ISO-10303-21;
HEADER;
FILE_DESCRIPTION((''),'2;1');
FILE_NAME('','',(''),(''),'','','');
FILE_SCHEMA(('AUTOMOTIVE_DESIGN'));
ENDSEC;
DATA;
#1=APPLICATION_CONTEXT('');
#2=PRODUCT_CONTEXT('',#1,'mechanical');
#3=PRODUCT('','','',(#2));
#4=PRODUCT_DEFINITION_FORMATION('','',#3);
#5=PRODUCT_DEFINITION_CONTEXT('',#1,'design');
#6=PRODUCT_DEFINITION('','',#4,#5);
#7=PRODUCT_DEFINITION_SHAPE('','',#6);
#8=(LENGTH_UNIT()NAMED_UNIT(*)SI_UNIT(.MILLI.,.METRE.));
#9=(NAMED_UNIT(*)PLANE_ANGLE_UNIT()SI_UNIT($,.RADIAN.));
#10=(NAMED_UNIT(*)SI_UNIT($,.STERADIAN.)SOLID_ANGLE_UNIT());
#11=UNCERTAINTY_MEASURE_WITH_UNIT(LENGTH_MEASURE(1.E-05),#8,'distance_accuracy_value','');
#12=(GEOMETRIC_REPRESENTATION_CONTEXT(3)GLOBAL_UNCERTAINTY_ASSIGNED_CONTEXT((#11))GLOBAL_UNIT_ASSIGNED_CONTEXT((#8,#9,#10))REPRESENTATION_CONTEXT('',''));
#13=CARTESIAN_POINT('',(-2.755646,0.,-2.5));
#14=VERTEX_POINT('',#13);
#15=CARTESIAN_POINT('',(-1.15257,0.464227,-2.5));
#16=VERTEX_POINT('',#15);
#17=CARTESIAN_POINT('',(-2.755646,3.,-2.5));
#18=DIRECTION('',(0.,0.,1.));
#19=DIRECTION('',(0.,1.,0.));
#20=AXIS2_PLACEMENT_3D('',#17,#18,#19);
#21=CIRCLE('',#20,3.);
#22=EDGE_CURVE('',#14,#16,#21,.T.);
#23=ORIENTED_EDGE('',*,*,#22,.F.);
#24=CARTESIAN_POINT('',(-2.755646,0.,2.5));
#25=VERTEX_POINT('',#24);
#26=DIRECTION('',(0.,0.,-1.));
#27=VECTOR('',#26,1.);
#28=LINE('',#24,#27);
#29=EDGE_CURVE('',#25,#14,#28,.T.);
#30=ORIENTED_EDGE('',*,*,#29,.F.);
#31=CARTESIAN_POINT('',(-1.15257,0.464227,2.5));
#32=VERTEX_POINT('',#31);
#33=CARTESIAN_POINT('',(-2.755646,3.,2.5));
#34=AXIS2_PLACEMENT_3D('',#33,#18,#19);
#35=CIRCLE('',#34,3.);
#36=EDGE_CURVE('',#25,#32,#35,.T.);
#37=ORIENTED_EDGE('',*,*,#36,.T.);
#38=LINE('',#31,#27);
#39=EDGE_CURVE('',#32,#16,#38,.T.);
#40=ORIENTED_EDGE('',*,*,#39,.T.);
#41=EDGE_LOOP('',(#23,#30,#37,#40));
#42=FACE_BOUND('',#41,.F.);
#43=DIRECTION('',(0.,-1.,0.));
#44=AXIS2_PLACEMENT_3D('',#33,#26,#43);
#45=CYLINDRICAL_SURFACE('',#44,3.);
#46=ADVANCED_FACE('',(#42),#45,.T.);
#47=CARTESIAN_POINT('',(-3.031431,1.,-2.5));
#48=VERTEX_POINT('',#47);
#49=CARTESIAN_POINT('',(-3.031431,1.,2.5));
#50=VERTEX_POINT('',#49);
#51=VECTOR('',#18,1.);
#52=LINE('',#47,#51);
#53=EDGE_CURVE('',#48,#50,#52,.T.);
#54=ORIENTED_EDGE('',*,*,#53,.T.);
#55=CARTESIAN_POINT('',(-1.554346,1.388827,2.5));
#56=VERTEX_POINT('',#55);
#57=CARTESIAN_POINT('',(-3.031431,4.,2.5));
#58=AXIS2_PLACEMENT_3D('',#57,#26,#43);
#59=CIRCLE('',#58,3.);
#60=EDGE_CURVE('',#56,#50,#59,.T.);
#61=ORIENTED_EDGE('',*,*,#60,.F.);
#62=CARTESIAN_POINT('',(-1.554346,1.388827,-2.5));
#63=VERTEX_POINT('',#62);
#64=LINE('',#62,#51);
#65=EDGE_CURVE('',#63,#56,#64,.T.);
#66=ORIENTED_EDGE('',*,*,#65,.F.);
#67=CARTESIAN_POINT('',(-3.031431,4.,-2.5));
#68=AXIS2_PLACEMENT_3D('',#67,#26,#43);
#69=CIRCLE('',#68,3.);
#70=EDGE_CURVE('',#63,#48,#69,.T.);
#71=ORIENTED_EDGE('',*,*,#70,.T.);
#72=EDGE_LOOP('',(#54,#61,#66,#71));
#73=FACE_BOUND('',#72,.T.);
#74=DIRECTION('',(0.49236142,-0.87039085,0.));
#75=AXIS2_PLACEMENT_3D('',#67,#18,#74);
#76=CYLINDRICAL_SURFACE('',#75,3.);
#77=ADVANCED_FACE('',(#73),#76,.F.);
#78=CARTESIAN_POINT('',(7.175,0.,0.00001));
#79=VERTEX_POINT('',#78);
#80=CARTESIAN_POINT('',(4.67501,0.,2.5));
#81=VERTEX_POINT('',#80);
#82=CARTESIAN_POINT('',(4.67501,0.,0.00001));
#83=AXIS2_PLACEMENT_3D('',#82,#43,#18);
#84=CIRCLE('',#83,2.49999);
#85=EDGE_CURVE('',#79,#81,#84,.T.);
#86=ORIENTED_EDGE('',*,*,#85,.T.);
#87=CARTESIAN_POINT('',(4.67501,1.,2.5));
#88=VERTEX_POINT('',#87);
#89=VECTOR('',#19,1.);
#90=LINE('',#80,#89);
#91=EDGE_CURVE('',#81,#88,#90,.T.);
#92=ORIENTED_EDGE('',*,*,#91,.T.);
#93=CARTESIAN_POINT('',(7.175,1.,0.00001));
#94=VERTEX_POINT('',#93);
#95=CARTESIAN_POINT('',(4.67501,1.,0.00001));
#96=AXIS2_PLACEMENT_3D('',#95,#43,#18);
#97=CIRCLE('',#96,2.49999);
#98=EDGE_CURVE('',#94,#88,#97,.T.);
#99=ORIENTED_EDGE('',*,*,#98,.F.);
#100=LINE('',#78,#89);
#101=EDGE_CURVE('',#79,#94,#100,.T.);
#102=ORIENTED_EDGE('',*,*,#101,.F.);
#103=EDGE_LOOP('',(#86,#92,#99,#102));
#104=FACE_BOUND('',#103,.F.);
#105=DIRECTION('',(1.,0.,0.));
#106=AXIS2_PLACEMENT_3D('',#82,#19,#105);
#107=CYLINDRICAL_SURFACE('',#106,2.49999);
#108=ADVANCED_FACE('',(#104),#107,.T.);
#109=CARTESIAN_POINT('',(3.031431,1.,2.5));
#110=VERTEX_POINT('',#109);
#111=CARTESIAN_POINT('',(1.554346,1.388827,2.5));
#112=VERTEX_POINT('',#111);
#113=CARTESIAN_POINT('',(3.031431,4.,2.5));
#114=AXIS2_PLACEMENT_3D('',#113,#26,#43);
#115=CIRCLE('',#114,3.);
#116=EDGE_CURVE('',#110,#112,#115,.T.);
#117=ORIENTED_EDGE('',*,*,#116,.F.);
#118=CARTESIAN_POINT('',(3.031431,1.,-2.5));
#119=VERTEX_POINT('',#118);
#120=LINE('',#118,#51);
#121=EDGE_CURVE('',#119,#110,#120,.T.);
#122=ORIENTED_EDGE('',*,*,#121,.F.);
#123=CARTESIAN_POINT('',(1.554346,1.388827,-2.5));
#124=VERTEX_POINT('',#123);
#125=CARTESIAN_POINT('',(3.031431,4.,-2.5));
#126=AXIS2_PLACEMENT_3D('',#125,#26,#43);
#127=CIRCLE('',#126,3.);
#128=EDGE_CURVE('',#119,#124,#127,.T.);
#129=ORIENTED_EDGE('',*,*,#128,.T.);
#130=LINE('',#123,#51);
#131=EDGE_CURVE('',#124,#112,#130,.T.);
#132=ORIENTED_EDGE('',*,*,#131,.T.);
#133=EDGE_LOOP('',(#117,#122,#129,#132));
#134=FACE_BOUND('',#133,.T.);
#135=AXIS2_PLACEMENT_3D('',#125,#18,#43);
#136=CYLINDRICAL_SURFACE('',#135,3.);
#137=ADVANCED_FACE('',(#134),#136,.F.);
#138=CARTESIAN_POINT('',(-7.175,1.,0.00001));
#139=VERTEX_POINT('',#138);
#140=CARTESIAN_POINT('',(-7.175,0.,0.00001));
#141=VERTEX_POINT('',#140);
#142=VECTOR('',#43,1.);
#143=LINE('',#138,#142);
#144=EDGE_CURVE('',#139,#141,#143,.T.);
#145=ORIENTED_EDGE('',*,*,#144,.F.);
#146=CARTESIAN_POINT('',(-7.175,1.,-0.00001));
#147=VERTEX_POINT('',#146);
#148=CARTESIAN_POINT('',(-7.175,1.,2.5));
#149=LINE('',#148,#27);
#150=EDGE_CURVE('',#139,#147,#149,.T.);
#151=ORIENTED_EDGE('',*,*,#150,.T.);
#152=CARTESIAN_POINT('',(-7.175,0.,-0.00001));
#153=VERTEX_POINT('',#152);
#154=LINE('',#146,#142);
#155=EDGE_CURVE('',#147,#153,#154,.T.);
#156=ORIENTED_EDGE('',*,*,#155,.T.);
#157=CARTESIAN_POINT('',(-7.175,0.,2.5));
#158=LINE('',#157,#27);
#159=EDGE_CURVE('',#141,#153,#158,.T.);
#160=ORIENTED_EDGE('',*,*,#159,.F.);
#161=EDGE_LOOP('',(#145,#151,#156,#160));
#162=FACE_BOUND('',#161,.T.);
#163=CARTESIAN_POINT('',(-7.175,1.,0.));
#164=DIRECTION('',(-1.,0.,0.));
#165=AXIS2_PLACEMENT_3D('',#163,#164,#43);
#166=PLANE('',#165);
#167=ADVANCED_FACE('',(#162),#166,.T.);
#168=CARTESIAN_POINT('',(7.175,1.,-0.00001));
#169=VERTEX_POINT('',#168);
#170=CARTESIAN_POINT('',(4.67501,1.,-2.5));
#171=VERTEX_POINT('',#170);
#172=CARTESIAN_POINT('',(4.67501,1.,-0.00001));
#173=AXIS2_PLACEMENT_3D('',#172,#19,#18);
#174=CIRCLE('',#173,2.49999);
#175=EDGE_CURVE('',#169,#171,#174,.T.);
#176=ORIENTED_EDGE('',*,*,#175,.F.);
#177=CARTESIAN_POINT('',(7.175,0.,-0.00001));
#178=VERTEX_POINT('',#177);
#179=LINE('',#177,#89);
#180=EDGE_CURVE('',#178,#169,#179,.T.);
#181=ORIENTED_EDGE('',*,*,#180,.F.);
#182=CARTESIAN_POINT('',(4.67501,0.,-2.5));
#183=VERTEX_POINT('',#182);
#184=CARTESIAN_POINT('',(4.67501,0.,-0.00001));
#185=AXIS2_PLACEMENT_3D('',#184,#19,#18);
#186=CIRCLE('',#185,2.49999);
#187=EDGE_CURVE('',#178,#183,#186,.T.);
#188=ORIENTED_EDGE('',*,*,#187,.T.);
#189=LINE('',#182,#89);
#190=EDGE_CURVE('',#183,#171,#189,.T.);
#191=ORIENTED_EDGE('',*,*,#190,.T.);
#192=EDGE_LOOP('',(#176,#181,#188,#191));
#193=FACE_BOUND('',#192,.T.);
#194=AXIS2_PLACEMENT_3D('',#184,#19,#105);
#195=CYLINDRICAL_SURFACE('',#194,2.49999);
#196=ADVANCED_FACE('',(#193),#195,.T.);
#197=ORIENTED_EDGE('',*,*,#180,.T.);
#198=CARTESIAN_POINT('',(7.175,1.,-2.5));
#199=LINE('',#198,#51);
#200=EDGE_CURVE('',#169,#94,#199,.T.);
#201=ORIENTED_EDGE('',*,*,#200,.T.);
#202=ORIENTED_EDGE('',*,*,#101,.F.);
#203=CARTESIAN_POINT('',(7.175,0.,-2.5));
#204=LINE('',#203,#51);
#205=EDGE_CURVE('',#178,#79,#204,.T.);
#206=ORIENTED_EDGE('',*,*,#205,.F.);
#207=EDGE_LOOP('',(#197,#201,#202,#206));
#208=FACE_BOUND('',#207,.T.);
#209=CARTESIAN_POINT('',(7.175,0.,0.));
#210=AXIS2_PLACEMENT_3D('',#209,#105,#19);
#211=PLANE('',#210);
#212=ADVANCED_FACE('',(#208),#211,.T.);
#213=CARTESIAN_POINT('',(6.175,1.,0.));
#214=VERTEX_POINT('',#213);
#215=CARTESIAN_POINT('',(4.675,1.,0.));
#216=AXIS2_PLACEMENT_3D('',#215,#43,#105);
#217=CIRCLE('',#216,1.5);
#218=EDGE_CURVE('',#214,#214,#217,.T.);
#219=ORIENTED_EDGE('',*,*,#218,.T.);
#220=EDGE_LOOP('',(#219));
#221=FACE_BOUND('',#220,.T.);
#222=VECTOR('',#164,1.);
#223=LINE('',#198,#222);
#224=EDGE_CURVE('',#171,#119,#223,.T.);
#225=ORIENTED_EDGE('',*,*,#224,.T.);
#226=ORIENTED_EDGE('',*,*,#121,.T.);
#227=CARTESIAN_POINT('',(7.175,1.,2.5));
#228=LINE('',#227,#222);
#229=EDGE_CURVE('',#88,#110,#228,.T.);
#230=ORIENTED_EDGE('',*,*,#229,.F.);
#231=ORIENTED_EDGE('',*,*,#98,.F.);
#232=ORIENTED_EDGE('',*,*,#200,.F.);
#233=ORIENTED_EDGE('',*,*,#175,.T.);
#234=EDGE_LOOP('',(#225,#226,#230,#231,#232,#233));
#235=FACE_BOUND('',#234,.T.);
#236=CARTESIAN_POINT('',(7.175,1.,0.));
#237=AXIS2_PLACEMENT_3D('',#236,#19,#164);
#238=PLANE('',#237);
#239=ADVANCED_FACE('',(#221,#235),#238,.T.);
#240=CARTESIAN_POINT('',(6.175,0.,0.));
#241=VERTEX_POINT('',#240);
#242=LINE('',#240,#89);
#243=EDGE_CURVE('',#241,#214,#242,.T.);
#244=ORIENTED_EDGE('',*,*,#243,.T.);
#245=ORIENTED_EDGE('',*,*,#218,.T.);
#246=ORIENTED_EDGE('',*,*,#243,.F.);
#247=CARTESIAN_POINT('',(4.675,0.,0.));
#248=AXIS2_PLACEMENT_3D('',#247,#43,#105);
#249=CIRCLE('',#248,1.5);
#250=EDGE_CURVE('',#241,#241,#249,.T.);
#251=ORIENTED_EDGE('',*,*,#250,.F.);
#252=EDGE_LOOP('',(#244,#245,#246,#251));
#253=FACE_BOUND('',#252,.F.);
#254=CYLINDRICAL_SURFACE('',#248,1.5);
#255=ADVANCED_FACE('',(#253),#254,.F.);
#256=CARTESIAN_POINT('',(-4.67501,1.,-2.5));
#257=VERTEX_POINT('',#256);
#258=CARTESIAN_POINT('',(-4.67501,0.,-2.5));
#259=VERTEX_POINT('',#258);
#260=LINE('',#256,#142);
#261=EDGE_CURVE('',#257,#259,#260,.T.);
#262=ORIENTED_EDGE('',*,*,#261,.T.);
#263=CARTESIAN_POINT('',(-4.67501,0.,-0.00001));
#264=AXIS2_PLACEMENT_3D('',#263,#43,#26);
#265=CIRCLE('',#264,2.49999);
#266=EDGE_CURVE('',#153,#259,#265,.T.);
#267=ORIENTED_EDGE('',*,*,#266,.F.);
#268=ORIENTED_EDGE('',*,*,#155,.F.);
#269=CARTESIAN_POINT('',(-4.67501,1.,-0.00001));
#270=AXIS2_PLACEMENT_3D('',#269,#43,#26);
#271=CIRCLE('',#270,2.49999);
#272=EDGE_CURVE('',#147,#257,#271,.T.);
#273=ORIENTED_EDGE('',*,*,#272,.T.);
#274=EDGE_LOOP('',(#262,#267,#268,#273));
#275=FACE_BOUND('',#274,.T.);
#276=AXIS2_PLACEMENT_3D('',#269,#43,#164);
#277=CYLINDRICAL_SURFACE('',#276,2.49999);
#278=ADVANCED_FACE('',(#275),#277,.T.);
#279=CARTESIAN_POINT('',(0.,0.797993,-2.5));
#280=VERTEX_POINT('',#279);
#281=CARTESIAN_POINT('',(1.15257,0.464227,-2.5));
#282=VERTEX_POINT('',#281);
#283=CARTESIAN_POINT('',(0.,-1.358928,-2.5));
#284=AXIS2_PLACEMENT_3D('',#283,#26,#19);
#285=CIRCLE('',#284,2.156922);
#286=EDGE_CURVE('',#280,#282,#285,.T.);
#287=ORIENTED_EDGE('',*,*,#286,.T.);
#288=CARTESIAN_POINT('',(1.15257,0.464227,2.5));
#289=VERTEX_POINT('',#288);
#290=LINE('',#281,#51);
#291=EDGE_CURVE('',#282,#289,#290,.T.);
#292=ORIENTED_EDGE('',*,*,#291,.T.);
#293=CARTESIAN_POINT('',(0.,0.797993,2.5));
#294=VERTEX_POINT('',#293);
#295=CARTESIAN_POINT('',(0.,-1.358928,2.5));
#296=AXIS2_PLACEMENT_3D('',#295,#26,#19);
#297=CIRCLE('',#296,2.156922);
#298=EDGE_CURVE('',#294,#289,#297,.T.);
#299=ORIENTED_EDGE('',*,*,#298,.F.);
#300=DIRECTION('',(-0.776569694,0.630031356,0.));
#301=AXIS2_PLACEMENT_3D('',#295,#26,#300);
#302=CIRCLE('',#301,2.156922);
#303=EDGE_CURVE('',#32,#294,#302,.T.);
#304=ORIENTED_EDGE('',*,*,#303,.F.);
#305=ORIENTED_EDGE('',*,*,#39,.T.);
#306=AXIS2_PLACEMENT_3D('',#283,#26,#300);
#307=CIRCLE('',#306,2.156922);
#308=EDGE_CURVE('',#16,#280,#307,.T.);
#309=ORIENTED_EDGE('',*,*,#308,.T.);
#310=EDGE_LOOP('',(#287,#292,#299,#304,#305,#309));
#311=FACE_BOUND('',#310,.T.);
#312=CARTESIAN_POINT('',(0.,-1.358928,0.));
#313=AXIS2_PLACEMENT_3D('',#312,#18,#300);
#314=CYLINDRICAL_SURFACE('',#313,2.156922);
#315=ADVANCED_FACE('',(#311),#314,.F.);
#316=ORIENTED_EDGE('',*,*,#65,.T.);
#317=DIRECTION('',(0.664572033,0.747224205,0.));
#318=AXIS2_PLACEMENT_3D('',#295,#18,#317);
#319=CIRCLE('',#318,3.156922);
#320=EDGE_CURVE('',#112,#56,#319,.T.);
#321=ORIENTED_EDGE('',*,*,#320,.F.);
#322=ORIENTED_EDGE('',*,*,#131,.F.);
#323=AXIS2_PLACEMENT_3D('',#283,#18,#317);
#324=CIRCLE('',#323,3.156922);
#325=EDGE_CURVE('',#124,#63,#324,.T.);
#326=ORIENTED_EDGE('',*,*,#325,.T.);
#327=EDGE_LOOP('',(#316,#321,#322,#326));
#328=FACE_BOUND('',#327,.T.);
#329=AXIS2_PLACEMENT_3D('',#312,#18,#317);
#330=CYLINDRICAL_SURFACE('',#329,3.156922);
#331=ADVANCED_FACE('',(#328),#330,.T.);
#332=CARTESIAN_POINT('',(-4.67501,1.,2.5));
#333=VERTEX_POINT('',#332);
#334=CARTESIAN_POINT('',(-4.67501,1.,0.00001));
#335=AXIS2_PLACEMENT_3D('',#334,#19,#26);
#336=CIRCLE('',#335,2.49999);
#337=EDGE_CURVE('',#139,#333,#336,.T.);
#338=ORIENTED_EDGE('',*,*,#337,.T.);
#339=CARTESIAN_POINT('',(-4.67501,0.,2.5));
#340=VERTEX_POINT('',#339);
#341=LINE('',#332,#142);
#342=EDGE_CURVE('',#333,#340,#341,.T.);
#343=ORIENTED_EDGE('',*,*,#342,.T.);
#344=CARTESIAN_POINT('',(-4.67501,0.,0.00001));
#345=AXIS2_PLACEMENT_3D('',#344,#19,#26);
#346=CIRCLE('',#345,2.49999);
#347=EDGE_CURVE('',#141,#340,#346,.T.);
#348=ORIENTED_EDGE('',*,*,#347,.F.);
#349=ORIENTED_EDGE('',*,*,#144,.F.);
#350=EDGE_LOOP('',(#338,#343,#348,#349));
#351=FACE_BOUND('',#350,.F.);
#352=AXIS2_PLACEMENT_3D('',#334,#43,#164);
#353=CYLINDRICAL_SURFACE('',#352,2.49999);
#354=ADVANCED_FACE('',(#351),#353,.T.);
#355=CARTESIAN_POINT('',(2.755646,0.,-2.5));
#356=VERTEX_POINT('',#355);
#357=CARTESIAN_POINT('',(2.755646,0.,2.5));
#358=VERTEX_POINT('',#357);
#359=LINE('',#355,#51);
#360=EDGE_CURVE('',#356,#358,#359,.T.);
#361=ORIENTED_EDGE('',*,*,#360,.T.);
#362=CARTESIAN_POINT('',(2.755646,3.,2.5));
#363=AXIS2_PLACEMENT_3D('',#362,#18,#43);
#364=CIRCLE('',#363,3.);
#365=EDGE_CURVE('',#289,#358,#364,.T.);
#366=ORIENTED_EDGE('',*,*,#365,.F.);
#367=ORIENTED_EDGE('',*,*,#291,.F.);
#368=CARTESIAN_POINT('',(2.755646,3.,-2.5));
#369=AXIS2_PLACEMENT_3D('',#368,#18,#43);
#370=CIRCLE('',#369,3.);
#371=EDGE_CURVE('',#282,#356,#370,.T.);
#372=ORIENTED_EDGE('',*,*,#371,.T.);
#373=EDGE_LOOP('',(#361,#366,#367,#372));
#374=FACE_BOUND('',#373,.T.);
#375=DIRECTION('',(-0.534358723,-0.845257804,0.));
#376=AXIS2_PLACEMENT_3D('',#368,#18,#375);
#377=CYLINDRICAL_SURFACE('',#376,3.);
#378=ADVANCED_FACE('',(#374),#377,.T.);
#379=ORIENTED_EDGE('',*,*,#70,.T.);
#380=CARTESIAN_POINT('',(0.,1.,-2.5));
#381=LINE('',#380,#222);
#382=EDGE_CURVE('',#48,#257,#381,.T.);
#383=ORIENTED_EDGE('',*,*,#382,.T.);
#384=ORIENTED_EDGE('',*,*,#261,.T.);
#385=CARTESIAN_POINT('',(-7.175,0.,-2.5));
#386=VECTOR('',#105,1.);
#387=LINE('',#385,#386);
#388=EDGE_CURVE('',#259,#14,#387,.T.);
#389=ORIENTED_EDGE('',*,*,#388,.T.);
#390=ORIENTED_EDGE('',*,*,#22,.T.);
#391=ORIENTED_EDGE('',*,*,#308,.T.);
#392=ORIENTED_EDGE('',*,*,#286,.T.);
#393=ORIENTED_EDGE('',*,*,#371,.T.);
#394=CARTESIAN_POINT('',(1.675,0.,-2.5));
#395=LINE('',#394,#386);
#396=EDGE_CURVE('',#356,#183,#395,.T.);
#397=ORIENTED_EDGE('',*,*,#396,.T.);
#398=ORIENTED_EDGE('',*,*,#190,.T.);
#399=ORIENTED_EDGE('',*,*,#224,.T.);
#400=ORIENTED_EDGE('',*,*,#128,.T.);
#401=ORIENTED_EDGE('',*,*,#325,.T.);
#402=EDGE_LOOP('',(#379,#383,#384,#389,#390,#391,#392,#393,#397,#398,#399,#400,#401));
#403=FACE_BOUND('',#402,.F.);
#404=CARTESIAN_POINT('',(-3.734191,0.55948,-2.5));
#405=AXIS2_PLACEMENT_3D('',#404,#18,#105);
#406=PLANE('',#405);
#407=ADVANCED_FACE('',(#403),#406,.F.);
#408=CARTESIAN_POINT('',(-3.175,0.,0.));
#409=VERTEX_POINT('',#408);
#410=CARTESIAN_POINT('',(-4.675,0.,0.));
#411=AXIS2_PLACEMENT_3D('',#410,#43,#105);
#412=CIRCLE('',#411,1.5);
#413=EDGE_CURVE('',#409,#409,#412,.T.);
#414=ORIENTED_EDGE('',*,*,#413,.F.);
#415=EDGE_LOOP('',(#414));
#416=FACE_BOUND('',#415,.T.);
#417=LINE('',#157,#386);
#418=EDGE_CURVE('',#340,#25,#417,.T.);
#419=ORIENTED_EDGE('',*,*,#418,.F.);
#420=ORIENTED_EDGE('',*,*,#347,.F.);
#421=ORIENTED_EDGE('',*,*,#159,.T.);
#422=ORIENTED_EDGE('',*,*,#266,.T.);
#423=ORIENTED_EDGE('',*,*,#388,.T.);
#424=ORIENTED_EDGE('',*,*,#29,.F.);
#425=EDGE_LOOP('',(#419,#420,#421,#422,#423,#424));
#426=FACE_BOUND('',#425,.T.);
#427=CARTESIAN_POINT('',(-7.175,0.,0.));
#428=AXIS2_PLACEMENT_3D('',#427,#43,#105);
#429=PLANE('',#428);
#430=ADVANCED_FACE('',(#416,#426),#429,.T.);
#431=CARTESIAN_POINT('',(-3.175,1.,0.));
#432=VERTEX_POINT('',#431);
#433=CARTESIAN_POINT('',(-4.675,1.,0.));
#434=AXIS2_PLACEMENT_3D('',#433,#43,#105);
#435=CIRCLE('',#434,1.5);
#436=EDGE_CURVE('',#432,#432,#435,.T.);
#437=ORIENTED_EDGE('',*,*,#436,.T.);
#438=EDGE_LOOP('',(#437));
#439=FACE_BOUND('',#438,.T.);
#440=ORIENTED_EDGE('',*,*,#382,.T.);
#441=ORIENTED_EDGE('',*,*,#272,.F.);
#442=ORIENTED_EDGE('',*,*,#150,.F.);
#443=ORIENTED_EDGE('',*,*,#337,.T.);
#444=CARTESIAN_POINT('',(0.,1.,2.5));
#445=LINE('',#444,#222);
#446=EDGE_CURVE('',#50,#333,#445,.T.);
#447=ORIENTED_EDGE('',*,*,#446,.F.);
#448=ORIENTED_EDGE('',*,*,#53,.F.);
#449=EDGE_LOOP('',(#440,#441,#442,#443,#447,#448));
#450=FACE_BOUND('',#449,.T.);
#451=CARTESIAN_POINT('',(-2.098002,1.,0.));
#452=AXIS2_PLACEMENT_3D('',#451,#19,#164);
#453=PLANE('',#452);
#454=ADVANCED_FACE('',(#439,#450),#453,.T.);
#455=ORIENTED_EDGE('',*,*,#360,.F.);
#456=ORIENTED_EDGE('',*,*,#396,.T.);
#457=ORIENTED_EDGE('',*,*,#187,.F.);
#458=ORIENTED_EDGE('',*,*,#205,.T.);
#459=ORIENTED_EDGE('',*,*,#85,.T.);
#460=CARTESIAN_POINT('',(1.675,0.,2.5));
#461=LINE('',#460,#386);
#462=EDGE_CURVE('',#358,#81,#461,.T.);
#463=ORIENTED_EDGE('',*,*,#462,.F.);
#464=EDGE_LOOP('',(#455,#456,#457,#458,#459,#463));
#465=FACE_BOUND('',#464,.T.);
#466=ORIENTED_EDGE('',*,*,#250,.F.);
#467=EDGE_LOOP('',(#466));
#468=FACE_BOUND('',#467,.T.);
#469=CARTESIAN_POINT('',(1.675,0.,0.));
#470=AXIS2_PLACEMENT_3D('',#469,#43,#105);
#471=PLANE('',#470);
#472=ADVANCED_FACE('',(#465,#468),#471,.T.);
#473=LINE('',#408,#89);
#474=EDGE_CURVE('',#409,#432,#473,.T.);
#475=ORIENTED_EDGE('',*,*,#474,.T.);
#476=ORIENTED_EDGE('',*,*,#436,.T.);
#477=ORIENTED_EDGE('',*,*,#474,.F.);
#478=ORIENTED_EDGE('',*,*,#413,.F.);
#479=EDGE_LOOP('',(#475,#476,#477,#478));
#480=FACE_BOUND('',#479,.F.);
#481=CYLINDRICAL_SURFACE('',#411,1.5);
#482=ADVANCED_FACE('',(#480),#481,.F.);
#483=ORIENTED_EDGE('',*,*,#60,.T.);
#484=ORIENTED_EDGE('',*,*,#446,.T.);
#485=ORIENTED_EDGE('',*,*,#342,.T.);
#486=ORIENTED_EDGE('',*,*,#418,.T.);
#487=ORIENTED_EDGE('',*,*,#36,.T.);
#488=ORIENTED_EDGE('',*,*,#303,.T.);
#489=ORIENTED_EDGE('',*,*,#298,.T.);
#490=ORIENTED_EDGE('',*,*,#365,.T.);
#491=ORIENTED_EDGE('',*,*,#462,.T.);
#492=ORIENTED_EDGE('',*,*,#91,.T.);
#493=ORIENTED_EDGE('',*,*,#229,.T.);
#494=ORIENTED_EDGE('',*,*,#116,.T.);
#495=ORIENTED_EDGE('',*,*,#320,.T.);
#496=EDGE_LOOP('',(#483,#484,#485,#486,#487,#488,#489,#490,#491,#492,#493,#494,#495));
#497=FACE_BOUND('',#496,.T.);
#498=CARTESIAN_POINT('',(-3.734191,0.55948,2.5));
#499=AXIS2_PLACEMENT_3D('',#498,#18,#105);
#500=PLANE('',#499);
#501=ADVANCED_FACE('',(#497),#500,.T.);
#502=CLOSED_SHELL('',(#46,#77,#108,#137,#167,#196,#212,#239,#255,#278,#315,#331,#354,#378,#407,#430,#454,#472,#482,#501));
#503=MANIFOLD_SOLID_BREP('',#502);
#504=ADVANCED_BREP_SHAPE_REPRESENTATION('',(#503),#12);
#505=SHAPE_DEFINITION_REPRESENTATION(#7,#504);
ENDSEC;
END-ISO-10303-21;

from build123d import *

# Parameters (mm, degrees)
F1_DEPTH      = 2.5
F1_DEPTH_BACK = 2.5
F2_R          = 2.49999
F3_R          = 1.5
F4_DEPTH      = 25
F5_R          = 3


# Not quite as in the source:
# - a fillet or chamfer is up to 0.001 mm smaller than in the source, because OpenCascade refuses the exact size


with BuildPart() as f1:
    # F0 (on Top) → F1 (new body, two sides)
    with BuildSketch(Plane.XY) as f1_sk:
        with BuildLine():
            Line((-6.175, 0), (-4.675, 0))
            Line((-4.675, 0), (-3.175, 0))
            Line((-3.175, 0), (-1.675, 0))
            ThreePointArc((-1.675, 0), (-0.9276877762, 0.5883021777), (0, 0.7979933839))
            Line((0, 0.7979933839), (0, 1))
            Line((0, 1), (-2.0980018512, 1))
            Line((-2.0980018512, 1), (-7.175, 1))
            Line((-7.175, 1), (-7.175, 0))
            Line((-7.175, 0), (-6.175, 0))
        make_face()
        with BuildLine():
            Line((-2.0980018512, 1), (0, 1))
            Line((0, 1), (2.0980018512, 1))
            ThreePointArc((2.0980018512, 1), (0, 1.7979933839), (-2.0980018512, 1))
        make_face()
        with BuildLine():
            Line((0, 1), (0, 0.7979933839))
            ThreePointArc((0, 0.7979933839), (0.9276877762, 0.5883021777), (1.675, 0))
            Line((1.675, 0), (3.175, 0))
            Line((3.175, 0), (4.675, 0))
            Line((4.675, 0), (6.175, 0))
            Line((6.175, 0), (7.175, 0))
            Line((7.175, 0), (7.175, 1))
            Line((7.175, 1), (2.0980018512, 1))
            Line((2.0980018512, 1), (0, 1))
        make_face()
    extrude(amount=F1_DEPTH)
    extrude(f1_sk.sketch, amount=-F1_DEPTH_BACK)

    # F2 (radius 2.5 in the source; OpenCascade refuses exactly that, so slightly less here)
    f2_edges = [f1.edges().sort_by_distance(p)[0] for p in [
        (7.175, 0.5, 2.5),
        (7.175, 0.5, -2.5),
        (-7.175, 0.5, 2.5),
        (-7.175, 0.5, -2.5),
    ]]
    fillet(f2_edges, radius=F2_R)

    # F3 (on face) → F4 (cut)
    with BuildSketch(Plane.XZ):
        with BuildLine():
            ThreePointArc((3.175, 0), (4.675, -1.5), (6.175, 0))
            ThreePointArc((6.175, 0), (4.675, 1.5), (3.175, 0))
        make_face()
        with Locations((-4.675, 0)):
            Circle(F3_R)
    extrude(amount=-F4_DEPTH, mode=Mode.SUBTRACT)

    # F5
    f5_edges = [f1.edges().sort_by_distance(p)[0] for p in [
        (1.675, 0, 0),
        (-1.675, 0, 0),
        (-2.098002, 1, 0),
        (2.098002, 1, 0),
    ]]
    fillet(f5_edges, radius=F5_R)


solid = f1.part
